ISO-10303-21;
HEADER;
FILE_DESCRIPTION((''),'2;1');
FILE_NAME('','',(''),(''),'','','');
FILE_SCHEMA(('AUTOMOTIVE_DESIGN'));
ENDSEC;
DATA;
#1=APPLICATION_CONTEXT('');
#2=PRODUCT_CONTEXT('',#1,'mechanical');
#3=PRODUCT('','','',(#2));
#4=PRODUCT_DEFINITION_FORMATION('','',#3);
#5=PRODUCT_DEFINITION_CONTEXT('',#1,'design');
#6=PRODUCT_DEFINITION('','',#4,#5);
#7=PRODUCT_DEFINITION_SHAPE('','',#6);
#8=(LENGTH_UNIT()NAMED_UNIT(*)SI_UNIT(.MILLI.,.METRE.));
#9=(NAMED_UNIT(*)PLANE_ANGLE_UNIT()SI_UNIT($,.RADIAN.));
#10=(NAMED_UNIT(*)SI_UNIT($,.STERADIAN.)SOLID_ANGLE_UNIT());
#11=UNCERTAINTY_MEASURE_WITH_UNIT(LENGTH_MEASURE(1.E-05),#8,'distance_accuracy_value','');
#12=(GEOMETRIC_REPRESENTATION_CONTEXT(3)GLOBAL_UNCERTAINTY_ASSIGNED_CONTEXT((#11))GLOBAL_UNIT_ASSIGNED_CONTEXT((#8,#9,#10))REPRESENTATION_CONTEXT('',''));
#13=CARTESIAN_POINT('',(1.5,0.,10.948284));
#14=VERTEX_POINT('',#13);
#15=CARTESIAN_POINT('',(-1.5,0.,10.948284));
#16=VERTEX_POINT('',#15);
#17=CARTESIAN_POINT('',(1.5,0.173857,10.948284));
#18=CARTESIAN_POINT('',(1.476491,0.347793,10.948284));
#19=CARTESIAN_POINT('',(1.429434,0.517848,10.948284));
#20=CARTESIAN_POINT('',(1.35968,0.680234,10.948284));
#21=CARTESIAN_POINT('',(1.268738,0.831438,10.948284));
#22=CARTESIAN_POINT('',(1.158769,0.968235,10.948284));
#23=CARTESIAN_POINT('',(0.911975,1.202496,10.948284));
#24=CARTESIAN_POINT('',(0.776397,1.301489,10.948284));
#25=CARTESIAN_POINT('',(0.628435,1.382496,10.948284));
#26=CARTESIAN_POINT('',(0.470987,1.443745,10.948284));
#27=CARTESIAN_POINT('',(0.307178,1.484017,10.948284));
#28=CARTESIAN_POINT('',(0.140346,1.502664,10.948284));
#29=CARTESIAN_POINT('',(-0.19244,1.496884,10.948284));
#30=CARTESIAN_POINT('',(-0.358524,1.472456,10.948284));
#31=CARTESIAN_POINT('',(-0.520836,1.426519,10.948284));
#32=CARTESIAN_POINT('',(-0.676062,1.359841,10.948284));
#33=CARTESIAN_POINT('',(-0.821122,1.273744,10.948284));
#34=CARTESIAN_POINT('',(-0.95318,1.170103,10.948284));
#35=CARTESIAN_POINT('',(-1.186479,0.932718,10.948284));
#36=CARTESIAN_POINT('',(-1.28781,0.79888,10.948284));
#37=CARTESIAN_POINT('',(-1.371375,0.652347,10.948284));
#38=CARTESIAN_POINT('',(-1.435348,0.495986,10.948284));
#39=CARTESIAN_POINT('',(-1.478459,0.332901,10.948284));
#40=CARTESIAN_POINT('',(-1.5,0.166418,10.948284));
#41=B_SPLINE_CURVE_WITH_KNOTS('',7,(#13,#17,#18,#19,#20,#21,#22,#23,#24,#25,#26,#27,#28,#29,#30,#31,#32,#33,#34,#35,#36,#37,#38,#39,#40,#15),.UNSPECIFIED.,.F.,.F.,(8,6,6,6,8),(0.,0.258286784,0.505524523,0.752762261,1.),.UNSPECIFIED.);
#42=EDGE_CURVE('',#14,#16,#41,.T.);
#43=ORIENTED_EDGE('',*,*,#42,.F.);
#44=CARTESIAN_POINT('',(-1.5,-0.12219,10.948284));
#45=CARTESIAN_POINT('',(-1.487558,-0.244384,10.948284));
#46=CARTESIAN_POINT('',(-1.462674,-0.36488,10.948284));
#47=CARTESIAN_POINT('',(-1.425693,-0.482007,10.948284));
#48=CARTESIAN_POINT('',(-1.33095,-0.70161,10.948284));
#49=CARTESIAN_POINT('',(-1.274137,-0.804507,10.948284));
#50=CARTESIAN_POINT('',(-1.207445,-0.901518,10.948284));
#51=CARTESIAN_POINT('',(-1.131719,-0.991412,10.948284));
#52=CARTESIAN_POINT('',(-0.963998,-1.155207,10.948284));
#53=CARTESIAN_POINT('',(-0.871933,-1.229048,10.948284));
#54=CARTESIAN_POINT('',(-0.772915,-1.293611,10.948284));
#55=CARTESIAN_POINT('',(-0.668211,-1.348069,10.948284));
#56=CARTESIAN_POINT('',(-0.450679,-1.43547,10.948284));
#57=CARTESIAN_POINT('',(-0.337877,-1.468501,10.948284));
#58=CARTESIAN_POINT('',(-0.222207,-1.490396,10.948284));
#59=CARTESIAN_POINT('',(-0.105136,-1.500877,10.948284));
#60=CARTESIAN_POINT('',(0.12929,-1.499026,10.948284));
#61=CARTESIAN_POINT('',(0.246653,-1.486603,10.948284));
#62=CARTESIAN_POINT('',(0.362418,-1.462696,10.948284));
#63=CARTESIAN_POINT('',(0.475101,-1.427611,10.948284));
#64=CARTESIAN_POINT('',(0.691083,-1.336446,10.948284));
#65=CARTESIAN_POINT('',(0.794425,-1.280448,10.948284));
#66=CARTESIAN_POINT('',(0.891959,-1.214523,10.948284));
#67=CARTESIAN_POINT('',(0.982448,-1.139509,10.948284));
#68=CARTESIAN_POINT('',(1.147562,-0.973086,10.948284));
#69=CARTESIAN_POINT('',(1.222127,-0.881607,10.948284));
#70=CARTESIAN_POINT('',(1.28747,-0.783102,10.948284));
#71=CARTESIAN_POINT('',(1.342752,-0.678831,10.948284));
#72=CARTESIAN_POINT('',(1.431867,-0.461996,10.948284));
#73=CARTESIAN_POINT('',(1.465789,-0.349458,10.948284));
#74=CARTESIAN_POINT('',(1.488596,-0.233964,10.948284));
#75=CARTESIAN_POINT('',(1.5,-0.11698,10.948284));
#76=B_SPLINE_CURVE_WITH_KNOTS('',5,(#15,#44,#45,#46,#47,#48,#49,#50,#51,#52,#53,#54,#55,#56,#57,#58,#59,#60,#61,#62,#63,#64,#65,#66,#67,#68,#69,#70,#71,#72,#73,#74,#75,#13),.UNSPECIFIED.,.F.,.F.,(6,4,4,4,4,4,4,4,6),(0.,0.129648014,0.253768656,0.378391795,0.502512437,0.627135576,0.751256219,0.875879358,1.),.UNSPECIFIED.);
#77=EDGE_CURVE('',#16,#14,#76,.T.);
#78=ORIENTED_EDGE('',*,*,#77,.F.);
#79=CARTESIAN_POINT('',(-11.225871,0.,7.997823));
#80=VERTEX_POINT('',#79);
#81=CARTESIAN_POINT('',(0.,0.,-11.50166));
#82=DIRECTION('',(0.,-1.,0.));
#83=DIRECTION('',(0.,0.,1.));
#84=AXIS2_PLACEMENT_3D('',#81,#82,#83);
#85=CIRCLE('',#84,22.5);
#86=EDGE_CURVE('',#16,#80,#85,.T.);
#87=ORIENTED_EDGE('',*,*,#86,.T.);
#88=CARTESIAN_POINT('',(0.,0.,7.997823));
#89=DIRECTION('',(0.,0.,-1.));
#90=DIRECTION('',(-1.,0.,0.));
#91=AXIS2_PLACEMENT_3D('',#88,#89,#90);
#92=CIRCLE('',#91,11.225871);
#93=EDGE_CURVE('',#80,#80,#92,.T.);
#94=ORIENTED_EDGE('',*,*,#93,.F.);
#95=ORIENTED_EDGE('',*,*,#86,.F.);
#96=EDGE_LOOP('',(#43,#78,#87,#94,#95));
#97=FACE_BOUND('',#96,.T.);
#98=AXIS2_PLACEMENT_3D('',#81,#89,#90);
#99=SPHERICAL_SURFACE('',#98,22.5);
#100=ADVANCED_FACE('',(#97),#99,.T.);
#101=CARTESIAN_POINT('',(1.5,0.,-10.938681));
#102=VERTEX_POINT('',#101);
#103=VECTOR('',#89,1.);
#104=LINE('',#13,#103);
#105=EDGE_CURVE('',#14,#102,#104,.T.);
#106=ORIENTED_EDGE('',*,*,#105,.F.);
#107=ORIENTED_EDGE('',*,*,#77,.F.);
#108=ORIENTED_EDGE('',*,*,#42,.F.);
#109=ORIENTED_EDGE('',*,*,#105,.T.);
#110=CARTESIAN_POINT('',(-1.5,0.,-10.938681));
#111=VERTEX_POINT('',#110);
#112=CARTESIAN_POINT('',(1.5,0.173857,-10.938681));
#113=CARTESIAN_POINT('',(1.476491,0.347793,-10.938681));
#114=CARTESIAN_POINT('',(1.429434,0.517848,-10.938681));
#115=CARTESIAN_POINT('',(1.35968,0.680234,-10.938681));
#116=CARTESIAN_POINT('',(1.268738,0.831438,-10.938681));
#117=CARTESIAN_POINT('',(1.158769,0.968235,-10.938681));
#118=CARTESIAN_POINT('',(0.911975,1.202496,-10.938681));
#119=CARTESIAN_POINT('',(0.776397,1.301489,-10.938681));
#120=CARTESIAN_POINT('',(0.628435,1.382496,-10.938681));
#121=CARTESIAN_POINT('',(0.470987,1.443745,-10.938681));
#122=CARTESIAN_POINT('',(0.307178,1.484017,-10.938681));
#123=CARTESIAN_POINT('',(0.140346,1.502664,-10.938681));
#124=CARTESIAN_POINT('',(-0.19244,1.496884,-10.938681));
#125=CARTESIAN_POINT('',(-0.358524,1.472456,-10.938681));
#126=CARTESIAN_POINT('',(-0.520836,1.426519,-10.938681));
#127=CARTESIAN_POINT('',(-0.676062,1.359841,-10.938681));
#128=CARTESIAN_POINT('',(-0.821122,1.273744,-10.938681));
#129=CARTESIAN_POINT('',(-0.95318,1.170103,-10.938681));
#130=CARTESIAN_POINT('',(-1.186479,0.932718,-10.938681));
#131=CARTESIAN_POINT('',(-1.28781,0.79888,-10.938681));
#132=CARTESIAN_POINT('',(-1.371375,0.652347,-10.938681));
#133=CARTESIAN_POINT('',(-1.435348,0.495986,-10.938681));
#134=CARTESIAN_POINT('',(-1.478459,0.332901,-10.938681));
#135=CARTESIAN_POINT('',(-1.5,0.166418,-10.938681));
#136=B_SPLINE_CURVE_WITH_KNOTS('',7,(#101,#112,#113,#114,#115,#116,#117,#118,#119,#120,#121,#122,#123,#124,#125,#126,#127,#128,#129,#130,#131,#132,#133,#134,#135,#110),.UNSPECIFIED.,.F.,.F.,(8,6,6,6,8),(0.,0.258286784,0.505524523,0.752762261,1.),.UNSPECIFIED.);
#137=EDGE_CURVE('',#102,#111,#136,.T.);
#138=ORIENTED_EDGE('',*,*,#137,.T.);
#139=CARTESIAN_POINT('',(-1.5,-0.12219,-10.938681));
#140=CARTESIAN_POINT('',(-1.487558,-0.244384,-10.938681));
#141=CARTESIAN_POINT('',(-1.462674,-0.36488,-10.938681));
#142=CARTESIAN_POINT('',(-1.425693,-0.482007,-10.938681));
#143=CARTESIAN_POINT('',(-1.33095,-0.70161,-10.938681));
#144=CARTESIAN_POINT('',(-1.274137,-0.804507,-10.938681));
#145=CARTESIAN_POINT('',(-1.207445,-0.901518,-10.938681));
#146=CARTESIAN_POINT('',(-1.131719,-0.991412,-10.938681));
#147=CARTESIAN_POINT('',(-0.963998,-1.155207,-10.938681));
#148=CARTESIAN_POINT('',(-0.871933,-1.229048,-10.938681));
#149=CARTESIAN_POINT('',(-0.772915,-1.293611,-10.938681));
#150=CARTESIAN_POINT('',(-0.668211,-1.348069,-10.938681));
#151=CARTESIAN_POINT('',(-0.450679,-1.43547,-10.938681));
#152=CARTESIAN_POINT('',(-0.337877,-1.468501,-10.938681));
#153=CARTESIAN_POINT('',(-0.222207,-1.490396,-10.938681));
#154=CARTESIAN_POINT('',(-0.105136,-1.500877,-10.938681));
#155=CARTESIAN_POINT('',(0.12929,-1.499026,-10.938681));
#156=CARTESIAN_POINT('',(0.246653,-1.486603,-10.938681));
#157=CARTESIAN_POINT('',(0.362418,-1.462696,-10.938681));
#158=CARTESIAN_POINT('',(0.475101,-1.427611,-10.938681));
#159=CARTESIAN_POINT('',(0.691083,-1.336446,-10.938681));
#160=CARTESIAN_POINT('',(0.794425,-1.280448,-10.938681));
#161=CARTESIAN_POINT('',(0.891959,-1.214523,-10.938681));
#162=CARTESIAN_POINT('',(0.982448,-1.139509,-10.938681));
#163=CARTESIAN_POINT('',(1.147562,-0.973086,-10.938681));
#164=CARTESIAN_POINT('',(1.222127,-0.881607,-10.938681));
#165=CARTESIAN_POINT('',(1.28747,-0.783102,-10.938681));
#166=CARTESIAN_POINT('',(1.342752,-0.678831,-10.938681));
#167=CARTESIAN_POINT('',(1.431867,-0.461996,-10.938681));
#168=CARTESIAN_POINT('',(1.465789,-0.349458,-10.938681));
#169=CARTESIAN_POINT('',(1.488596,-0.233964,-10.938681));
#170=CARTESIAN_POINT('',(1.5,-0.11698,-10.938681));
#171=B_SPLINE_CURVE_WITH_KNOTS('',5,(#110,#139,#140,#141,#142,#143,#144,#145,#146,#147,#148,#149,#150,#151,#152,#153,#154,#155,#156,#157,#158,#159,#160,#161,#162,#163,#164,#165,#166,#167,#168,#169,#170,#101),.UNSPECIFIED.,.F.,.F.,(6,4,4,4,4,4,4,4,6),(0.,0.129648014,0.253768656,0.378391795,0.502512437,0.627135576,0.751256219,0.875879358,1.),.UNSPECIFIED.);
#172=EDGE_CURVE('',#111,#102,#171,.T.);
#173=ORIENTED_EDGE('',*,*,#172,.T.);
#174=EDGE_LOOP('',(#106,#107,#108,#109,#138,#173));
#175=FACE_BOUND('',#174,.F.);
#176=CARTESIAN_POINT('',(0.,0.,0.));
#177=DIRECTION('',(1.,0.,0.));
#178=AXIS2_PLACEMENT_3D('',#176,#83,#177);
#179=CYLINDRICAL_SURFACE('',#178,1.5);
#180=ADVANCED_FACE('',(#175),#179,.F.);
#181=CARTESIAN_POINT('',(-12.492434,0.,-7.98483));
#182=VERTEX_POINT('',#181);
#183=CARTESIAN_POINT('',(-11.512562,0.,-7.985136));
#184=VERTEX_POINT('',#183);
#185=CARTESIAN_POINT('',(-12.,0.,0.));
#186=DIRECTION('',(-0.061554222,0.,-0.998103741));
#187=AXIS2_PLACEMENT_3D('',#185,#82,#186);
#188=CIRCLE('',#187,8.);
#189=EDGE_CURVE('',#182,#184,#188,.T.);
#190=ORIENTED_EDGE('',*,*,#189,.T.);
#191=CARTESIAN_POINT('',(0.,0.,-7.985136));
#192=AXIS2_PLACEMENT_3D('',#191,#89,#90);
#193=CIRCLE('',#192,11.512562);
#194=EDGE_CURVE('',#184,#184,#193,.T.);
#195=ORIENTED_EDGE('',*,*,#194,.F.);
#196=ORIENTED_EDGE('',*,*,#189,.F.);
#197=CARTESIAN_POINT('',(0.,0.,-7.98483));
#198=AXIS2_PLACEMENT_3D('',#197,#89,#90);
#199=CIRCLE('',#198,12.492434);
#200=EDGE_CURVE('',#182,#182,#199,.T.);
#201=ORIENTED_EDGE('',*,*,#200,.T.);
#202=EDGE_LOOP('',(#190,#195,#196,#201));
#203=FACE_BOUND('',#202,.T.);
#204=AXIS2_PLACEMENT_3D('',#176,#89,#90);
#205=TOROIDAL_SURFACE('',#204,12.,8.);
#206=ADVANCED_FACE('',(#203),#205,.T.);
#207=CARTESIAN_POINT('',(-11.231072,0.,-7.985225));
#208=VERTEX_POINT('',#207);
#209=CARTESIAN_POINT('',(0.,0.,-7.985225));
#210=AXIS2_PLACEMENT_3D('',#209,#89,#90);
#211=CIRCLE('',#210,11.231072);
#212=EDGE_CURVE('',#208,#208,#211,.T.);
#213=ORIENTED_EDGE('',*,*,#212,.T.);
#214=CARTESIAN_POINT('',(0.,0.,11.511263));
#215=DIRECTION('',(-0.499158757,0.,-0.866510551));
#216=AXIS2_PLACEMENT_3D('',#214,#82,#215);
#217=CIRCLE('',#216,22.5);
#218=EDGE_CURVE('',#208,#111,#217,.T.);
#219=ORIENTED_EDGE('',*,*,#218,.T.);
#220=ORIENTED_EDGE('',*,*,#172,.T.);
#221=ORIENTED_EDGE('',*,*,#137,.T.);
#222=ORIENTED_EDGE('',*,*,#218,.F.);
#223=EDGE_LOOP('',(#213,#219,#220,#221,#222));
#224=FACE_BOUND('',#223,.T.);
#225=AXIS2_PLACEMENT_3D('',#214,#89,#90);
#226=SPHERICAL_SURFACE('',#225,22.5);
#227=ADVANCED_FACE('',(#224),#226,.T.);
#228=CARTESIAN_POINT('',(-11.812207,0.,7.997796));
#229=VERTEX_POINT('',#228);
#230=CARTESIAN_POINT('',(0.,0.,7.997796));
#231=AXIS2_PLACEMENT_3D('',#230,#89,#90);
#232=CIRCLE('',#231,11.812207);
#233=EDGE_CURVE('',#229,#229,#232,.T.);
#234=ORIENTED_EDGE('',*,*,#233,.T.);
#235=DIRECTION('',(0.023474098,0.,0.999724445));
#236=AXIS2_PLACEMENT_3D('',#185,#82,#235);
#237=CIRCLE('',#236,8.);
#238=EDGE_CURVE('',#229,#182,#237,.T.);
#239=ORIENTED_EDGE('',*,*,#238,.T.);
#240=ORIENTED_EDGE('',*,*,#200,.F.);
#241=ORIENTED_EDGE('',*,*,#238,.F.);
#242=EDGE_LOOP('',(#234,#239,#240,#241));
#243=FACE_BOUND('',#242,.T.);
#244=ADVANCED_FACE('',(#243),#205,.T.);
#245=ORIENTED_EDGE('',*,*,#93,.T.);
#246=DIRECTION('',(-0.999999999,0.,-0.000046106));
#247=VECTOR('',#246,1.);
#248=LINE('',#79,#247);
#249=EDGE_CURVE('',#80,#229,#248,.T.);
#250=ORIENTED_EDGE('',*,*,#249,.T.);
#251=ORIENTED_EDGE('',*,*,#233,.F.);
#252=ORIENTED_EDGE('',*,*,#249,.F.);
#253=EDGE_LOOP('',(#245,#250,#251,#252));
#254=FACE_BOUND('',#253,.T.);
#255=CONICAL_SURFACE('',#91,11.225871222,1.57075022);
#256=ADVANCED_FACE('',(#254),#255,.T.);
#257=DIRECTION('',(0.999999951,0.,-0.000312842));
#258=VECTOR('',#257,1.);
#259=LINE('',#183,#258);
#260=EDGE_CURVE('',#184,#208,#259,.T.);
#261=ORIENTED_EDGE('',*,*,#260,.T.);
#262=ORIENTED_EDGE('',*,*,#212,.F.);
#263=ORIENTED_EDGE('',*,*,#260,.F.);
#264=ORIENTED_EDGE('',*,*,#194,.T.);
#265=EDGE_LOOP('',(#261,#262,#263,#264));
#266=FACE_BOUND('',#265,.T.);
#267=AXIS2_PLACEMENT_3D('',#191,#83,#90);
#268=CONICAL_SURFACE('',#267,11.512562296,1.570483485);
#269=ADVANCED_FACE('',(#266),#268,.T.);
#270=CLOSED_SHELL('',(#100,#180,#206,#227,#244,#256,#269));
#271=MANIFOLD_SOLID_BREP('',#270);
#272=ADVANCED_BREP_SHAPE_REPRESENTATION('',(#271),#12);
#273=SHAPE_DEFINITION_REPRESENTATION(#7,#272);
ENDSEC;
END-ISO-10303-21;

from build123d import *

# Parameters (mm, degrees)
F2_R          = 1.5
F3_DEPTH      = 10.9897371298
F3_DEPTH_BACK = 10.99934016


with BuildPart() as f1:
    # F0 (on Front) → F1 (revolve)
    with BuildSketch(Plane.XZ):
        with BuildLine():
            Line((-11.5125622961, -7.9851364725), (-11.2310720272, -7.9852245345))
            ThreePointArc((-11.2310720272, -7.9852245345), (-5.8128750802, -10.2248932597), (0, -10.9887371298))
            Line((0, -10.9887371298), (0, 10.99834016))
            ThreePointArc((0, 10.99834016), (-5.8099761259, 10.2352713467), (-11.2258712218, 7.997822597))
            Line((-11.2258712218, 7.997822597), (-11.8122072176, 7.9977955632))
            ThreePointArc((-11.8122072176, 7.9977955632), (-19.9927642859, 0.3401750584), (-12.4924337781, -7.9848299277))
            Line((-12.4924337781, -7.9848299277), (-11.5125622961, -7.9851364725))
        make_face()
        with BuildLine():
            ThreePointArc((-12.4924337781, -7.9848299277), (-12.0025027349, -7.9999996085), (-11.5125622961, -7.9851364725))
            Line((-11.5125622961, -7.9851364725), (-12.4924337781, -7.9848299277))
        make_face()
    revolve(axis=Axis((0, 0, 0.0048015151), (0, 0, -1)))

    # F2 (on Top) → F3 (cut, two sides)
    with BuildSketch(Plane.XY) as f3_sk:
        Circle(F2_R)
    extrude(amount=-F3_DEPTH, mode=Mode.SUBTRACT)
    extrude(f3_sk.sketch, amount=F3_DEPTH_BACK, mode=Mode.SUBTRACT)


solid = f1.part
